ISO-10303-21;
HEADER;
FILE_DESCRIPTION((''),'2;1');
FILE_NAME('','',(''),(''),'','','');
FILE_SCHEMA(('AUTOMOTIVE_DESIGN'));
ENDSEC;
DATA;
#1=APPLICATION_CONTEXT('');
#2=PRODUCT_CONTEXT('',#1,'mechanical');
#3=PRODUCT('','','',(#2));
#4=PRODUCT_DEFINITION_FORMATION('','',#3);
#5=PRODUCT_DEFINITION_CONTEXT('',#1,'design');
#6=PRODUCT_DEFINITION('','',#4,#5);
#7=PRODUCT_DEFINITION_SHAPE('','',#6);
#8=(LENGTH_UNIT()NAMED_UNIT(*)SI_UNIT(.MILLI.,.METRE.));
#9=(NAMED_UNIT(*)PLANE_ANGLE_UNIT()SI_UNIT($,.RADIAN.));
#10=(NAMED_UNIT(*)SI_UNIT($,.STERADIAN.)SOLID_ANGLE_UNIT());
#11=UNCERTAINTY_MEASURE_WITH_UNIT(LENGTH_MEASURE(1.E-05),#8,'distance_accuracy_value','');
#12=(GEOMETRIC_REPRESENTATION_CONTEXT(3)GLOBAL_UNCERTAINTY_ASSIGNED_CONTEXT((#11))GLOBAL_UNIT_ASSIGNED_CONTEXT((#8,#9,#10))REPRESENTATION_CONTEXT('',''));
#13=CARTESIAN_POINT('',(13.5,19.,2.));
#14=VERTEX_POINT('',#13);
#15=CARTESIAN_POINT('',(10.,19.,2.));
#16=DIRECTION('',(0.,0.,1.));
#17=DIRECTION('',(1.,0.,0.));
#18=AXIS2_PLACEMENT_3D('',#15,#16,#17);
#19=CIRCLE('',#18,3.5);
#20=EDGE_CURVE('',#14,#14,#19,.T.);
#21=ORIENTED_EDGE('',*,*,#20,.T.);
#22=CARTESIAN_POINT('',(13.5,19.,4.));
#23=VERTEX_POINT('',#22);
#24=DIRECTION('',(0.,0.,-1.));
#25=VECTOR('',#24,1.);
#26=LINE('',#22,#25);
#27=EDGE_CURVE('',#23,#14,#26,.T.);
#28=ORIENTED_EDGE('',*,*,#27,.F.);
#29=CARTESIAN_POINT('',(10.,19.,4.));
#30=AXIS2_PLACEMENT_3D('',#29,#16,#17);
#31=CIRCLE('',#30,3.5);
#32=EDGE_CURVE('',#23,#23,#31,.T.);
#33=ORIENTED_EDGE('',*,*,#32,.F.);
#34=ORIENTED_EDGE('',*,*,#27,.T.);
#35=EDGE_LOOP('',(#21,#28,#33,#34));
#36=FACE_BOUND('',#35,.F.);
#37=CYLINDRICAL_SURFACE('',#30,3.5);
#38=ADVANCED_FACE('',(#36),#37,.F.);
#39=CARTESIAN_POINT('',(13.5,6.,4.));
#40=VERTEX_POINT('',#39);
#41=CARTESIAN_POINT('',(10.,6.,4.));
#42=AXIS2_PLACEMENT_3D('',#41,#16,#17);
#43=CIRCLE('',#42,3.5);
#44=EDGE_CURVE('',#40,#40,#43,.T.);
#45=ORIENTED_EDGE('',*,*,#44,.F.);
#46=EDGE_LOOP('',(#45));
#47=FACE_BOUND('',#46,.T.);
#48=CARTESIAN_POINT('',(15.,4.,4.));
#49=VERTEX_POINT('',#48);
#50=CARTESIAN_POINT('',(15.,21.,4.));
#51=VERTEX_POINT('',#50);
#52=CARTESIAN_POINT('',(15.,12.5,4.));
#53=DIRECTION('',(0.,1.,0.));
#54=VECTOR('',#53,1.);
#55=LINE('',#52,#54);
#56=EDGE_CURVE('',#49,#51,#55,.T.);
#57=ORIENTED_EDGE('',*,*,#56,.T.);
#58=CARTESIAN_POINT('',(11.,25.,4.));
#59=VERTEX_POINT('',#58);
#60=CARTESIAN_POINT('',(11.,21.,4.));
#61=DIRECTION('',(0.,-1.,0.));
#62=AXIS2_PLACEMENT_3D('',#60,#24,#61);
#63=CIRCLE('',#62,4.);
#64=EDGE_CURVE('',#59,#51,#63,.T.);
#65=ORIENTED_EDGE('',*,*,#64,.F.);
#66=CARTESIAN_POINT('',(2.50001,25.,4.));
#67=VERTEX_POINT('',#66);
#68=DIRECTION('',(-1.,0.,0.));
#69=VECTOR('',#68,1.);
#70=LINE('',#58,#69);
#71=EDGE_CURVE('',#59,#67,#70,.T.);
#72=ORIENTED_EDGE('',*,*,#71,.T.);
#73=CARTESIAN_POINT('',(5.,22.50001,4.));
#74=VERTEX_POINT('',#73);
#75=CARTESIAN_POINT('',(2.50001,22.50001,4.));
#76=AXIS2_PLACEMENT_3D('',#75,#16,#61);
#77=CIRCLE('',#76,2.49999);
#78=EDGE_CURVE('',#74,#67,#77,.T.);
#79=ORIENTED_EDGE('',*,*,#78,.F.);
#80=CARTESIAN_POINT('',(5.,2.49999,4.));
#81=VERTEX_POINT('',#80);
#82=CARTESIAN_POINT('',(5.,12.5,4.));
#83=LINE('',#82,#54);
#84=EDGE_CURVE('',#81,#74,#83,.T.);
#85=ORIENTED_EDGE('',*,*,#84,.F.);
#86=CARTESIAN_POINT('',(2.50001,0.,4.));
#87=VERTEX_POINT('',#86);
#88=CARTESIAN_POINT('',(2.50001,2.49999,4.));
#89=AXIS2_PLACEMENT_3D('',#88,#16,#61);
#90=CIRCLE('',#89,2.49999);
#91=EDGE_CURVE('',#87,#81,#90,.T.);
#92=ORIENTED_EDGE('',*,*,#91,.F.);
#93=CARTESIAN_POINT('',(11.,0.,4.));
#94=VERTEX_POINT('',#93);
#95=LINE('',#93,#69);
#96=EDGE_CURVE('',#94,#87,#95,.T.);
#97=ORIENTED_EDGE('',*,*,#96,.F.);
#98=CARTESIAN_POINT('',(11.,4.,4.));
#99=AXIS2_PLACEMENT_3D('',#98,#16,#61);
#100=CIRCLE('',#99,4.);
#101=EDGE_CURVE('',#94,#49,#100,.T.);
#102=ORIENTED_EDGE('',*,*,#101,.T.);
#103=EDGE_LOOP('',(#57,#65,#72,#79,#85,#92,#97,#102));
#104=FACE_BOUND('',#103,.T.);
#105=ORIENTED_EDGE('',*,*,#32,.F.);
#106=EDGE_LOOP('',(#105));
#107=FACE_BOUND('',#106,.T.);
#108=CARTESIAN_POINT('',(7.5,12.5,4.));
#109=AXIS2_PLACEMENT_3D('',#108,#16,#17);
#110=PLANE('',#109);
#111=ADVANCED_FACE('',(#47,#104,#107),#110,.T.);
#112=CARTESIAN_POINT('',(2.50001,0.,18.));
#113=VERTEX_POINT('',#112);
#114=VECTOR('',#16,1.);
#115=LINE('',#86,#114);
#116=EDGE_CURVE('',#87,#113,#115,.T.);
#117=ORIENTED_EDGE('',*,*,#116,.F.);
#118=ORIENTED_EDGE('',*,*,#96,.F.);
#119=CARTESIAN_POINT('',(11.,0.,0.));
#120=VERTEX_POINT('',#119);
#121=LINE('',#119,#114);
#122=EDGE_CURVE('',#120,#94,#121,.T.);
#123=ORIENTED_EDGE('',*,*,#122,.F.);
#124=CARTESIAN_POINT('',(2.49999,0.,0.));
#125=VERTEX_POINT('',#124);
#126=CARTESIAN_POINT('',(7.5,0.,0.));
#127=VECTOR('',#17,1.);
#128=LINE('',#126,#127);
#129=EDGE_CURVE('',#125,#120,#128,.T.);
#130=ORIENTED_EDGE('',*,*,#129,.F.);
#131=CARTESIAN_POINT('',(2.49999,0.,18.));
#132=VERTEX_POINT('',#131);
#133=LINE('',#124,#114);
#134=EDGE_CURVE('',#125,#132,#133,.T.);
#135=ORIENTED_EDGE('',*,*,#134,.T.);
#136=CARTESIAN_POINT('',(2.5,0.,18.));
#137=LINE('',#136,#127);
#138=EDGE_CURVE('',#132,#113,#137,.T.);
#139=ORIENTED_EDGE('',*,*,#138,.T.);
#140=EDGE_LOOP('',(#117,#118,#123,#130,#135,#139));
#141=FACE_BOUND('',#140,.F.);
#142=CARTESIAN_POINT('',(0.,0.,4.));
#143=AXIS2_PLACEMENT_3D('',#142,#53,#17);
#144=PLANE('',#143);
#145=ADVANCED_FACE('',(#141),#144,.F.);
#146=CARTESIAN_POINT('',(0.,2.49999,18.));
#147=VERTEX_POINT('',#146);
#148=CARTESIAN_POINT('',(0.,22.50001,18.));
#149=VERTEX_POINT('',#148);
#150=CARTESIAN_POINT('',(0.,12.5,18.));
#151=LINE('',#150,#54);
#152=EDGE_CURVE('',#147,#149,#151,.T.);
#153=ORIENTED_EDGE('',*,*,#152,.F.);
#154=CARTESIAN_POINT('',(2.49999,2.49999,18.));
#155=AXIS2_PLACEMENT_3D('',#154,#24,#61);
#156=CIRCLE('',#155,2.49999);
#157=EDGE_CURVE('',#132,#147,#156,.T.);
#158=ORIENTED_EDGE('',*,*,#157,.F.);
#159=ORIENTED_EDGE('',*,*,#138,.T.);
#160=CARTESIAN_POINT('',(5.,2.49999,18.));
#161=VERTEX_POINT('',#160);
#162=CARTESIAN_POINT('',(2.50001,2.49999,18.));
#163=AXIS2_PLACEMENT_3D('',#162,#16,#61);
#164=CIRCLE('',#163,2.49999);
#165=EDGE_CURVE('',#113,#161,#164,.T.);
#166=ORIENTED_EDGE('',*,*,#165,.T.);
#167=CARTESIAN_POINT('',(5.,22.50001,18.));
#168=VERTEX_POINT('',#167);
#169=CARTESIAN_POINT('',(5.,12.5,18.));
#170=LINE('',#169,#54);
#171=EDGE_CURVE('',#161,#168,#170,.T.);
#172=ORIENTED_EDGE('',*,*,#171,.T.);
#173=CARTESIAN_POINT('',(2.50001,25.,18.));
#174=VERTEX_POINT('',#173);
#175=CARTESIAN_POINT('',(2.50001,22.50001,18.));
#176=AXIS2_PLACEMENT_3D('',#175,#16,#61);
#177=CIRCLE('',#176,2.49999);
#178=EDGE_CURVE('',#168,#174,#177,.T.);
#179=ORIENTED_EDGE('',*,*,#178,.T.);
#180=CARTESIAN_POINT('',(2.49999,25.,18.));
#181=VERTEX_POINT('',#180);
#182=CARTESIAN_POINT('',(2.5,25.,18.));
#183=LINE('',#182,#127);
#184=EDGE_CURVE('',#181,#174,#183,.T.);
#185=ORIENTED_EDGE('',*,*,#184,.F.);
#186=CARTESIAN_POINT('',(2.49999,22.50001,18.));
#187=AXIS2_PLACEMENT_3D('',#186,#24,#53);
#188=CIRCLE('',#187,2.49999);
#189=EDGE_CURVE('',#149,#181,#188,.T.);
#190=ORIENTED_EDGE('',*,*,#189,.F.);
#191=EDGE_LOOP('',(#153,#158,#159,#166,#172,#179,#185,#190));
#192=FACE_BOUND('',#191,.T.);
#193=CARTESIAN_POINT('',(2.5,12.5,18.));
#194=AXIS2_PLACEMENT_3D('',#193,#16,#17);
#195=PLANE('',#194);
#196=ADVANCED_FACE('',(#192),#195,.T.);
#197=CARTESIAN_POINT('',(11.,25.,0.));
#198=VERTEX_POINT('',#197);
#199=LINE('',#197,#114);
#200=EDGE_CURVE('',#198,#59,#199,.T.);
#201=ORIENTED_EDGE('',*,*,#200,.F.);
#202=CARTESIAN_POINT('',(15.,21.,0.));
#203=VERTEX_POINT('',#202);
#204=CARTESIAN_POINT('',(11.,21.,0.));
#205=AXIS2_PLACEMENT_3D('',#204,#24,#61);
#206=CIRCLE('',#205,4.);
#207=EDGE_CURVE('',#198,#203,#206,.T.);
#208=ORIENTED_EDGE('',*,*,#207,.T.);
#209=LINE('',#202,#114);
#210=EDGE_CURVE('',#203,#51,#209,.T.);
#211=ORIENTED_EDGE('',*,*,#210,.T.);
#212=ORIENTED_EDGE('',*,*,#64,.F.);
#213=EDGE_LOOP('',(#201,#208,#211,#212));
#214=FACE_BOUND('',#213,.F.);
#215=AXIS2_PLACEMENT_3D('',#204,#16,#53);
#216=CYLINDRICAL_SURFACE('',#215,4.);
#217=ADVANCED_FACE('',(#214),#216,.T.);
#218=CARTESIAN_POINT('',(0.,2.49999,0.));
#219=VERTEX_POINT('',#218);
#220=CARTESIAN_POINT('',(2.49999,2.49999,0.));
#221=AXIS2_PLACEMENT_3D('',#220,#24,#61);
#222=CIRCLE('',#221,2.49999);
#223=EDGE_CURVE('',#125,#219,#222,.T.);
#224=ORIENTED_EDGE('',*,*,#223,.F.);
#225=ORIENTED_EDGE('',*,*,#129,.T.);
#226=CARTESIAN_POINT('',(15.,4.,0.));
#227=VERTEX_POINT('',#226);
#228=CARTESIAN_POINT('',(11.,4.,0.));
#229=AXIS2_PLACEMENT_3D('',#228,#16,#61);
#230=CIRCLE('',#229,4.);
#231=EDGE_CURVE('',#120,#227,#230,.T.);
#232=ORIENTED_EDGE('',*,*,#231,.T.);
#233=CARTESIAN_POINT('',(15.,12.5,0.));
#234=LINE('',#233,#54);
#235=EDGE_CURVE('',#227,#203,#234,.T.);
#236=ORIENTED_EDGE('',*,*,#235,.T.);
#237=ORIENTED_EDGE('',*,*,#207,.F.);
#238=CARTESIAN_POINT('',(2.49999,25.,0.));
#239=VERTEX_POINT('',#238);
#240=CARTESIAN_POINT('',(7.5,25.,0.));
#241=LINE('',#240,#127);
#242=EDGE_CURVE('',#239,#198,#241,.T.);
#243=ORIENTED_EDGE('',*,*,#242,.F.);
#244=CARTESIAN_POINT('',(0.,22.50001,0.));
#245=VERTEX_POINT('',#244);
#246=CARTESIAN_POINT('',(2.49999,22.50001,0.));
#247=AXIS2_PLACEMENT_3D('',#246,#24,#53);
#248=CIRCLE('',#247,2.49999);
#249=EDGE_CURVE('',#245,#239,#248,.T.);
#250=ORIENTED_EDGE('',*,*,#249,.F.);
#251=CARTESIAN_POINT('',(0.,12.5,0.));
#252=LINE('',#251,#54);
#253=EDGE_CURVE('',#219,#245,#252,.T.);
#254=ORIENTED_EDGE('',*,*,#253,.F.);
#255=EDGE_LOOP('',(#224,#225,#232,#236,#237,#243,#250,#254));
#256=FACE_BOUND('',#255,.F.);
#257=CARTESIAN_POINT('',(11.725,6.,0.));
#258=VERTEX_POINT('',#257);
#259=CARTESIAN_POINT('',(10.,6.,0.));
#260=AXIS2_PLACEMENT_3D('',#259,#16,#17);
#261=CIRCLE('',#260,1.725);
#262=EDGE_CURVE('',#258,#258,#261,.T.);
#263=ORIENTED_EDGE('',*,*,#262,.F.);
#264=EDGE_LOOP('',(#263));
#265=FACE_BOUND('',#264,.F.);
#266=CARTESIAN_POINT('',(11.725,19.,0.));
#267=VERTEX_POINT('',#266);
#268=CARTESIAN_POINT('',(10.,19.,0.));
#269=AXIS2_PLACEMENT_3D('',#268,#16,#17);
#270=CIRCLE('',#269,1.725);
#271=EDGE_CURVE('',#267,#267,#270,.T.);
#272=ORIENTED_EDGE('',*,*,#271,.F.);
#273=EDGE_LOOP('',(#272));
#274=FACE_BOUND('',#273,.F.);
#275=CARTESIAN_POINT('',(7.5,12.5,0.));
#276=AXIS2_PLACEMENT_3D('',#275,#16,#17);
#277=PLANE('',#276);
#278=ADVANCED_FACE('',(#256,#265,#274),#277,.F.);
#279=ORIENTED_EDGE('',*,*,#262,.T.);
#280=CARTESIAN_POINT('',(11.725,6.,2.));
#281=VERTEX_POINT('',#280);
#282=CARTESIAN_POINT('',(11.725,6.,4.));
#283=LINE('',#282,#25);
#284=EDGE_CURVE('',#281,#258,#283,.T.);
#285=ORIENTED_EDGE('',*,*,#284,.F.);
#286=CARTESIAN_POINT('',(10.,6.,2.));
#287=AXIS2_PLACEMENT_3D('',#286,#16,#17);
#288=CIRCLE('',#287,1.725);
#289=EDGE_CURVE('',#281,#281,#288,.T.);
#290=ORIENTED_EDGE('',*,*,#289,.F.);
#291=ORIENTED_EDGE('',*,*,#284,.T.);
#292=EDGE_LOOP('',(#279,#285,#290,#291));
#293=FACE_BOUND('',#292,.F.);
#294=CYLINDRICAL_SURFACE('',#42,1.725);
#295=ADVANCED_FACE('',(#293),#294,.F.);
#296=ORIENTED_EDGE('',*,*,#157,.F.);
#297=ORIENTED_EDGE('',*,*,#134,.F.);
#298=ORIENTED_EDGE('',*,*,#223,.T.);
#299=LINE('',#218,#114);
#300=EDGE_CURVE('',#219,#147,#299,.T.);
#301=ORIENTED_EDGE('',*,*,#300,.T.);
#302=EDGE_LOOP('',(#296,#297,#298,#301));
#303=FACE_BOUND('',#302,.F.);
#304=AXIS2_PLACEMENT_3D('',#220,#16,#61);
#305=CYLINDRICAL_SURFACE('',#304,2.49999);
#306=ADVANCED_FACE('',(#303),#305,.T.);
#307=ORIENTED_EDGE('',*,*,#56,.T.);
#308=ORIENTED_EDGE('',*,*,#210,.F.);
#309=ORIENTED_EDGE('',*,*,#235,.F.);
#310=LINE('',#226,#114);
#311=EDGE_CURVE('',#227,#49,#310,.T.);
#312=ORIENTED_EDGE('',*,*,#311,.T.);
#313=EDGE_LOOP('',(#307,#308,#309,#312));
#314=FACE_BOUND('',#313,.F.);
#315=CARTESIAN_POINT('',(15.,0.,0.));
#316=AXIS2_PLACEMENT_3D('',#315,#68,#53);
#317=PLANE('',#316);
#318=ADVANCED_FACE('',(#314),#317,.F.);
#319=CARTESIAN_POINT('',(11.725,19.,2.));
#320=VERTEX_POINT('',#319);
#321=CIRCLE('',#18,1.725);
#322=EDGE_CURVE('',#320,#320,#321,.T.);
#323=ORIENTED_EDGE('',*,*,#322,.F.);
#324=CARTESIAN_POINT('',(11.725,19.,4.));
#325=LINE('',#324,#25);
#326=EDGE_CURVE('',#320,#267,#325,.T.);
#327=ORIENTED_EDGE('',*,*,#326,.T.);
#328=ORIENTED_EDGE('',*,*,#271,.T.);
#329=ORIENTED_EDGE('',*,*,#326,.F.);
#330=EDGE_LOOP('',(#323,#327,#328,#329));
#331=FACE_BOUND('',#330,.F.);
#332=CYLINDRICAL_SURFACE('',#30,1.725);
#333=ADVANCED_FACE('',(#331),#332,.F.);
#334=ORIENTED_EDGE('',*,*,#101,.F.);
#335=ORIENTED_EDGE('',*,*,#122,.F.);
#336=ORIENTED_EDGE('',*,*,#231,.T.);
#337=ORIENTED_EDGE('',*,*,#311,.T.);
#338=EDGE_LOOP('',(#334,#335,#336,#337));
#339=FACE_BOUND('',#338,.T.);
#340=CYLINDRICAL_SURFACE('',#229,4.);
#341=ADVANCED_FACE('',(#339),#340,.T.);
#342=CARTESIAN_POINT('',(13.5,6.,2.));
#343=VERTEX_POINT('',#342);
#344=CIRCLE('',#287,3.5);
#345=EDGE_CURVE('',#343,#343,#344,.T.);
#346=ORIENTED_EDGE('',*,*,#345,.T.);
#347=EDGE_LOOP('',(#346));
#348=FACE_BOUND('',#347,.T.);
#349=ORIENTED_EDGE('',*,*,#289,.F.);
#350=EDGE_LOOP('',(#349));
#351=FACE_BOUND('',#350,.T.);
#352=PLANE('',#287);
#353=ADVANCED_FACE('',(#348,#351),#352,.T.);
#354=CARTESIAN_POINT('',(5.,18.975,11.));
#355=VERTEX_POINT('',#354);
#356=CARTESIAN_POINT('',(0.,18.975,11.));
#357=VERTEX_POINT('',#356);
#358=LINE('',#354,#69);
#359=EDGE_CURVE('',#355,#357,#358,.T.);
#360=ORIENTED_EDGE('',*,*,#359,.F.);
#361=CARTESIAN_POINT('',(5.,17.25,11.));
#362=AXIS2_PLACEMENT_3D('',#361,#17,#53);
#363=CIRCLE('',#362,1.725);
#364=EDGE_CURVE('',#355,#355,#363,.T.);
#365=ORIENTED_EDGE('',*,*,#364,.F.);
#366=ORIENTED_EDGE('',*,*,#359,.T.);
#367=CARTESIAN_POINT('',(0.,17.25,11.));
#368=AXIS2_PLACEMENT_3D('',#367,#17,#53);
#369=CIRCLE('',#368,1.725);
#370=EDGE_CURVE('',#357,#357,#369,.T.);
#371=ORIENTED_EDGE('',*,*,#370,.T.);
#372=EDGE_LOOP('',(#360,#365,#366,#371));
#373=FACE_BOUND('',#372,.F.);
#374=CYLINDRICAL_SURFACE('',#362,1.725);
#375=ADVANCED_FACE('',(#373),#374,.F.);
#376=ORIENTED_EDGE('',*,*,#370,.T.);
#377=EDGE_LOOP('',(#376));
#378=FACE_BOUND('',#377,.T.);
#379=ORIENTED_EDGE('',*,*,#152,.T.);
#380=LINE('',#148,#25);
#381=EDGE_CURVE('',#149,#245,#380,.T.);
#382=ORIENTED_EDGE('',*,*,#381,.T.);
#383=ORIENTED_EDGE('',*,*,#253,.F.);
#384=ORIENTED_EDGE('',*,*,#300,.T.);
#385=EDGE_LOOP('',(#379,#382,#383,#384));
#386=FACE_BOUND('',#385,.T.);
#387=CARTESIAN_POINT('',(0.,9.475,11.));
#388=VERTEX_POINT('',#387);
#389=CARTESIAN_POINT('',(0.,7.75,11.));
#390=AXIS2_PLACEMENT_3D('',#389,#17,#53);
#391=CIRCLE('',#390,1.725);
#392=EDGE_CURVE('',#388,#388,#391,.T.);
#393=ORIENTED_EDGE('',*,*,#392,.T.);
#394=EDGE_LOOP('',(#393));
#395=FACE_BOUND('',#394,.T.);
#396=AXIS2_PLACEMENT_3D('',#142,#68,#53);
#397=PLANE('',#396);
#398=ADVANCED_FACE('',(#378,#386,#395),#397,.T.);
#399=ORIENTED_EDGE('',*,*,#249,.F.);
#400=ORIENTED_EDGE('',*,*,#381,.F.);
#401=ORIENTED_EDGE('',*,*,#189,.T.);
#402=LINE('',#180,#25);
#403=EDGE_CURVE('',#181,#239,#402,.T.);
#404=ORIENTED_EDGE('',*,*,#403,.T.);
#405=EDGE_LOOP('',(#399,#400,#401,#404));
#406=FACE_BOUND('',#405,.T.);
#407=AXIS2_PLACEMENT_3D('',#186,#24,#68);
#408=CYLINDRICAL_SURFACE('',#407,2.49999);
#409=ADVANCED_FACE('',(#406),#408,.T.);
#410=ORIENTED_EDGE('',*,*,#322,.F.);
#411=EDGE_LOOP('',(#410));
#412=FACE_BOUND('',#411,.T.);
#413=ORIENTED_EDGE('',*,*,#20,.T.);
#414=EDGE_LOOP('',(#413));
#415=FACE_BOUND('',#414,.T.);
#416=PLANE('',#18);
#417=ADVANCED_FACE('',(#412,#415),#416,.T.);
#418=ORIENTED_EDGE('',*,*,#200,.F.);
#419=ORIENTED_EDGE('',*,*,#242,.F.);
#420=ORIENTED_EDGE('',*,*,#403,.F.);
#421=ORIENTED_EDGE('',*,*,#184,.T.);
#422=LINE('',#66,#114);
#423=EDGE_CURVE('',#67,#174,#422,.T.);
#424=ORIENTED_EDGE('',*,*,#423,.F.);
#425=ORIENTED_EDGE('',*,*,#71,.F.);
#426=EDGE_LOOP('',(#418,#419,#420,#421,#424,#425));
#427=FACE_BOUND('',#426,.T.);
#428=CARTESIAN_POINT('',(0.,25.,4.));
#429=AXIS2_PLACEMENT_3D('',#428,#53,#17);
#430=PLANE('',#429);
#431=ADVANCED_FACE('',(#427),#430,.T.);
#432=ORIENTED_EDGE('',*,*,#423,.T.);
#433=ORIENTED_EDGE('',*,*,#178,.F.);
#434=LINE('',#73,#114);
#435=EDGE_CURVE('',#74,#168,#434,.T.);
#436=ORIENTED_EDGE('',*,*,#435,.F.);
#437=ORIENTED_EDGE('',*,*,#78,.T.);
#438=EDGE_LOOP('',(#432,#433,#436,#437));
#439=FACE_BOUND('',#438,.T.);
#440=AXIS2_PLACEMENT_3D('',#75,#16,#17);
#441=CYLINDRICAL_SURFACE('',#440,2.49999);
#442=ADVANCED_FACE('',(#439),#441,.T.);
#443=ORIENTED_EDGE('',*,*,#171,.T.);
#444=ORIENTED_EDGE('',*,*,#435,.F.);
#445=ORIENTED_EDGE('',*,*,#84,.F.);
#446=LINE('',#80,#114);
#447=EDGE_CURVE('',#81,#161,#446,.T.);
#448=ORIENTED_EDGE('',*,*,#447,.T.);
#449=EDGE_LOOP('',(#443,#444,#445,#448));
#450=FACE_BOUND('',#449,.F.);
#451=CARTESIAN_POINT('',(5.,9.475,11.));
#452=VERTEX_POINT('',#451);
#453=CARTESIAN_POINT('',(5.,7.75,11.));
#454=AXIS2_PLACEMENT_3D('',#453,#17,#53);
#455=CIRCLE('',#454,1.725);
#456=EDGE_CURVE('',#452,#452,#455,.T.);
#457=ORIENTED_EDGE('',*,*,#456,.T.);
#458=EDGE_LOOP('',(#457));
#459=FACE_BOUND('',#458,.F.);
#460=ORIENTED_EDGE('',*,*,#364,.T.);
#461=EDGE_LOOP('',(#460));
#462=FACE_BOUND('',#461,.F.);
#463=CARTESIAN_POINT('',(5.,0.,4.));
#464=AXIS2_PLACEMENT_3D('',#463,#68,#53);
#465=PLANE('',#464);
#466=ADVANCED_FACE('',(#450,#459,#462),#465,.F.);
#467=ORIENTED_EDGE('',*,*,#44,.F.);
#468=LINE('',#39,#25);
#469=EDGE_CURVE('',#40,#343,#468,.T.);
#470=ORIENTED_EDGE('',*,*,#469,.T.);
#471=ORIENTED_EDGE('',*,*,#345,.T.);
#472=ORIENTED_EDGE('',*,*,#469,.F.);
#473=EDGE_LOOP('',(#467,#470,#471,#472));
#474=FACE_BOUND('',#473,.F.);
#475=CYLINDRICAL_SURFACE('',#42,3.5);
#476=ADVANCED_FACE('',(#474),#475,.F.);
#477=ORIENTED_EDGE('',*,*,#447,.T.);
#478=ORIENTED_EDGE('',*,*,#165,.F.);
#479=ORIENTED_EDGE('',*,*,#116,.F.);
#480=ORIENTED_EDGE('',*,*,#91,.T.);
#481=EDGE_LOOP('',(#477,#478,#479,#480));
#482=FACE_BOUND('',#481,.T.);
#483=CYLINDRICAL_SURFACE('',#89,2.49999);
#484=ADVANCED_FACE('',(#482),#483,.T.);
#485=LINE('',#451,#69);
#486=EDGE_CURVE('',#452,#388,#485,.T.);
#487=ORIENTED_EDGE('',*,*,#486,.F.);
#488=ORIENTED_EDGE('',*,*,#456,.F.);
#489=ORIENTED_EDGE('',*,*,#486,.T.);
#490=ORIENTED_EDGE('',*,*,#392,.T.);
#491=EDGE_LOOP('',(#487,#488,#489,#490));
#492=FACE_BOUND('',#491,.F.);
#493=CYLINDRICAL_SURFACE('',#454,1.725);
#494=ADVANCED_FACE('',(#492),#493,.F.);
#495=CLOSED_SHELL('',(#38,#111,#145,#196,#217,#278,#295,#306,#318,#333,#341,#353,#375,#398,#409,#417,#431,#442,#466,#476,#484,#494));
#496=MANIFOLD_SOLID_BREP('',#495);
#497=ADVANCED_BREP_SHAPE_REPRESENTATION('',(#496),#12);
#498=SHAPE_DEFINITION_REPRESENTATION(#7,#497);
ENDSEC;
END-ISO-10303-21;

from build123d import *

# Parameters (mm, degrees)
F0_W     = 15
F0_H     = 25
F1_DEPTH = 4
F2_W     = 5
F2_H     = 25
F3_DEPTH = 14
F4_R     = 3.5
F4_R_2   = 1.725
F5_DEPTH = 2
F6_DEPTH = 4
F7_R     = 1.725
F8_DEPTH = 5
F9_R     = 4
F10_R    = 2.49999


# Not quite as in the source:
# - a fillet or chamfer is up to 0.001 mm smaller than in the source, because OpenCascade refuses the exact size


with BuildPart() as f1:
    # F0 (on Top) → F1 (new body)
    with BuildSketch(Plane.XY):
        with Locations((7.5, 12.5)):
            Rectangle(F0_W, F0_H)
    extrude(amount=F1_DEPTH)

    # F2 (on face) → F3 (join)
    with BuildSketch(Plane.XY.offset(4)):
        with Locations((2.5, 12.5)):
            Rectangle(F2_W, F2_H)
    extrude(amount=F3_DEPTH)

    # F4 (on face) → F5 (cut)
    with BuildSketch(Plane.XY.offset(4)):
        with Locations((10, 19)):
            Circle(F4_R)
        with Locations((10, 19)):
            Circle(F4_R_2, mode=Mode.SUBTRACT)
        with Locations((10, 6)):
            Circle(F4_R)
        with Locations((10, 6)):
            Circle(F4_R_2, mode=Mode.SUBTRACT)
    extrude(amount=-F5_DEPTH, mode=Mode.SUBTRACT)

    # F4 (on face) → F6 (cut, through all)
    with BuildSketch(Plane.XY.offset(4)):
        with Locations((10, 19)):
            Circle(F4_R_2)
        with Locations((10, 6)):
            Circle(F4_R_2)
    extrude(amount=-F6_DEPTH, mode=Mode.SUBTRACT)

    # F7 (on face) → F8 (cut, through all)
    with BuildSketch(Plane.YZ.offset(5)):
        with Locations((7.75, 11)):
            Circle(F7_R)
        with Locations((17.25, 11)):
            Circle(F7_R)
    extrude(amount=-F8_DEPTH, mode=Mode.SUBTRACT)

    # F9
    f9_edges = [f1.edges().sort_by_distance(p)[0] for p in [
        (15, 0, 2),
        (15, 25, 2),
    ]]
    fillet(f9_edges, radius=F9_R)

    # F10 (radius 2.5 in the source; OpenCascade refuses exactly that, so slightly less here)
    f10_edges = [f1.edges().sort_by_distance(p)[0] for p in [
        (0, 0, 9),
        (0, 25, 9),
        (5, 25, 11),
        (5, 0, 11),
    ]]
    fillet(f10_edges, radius=F10_R)


solid = f1.part
